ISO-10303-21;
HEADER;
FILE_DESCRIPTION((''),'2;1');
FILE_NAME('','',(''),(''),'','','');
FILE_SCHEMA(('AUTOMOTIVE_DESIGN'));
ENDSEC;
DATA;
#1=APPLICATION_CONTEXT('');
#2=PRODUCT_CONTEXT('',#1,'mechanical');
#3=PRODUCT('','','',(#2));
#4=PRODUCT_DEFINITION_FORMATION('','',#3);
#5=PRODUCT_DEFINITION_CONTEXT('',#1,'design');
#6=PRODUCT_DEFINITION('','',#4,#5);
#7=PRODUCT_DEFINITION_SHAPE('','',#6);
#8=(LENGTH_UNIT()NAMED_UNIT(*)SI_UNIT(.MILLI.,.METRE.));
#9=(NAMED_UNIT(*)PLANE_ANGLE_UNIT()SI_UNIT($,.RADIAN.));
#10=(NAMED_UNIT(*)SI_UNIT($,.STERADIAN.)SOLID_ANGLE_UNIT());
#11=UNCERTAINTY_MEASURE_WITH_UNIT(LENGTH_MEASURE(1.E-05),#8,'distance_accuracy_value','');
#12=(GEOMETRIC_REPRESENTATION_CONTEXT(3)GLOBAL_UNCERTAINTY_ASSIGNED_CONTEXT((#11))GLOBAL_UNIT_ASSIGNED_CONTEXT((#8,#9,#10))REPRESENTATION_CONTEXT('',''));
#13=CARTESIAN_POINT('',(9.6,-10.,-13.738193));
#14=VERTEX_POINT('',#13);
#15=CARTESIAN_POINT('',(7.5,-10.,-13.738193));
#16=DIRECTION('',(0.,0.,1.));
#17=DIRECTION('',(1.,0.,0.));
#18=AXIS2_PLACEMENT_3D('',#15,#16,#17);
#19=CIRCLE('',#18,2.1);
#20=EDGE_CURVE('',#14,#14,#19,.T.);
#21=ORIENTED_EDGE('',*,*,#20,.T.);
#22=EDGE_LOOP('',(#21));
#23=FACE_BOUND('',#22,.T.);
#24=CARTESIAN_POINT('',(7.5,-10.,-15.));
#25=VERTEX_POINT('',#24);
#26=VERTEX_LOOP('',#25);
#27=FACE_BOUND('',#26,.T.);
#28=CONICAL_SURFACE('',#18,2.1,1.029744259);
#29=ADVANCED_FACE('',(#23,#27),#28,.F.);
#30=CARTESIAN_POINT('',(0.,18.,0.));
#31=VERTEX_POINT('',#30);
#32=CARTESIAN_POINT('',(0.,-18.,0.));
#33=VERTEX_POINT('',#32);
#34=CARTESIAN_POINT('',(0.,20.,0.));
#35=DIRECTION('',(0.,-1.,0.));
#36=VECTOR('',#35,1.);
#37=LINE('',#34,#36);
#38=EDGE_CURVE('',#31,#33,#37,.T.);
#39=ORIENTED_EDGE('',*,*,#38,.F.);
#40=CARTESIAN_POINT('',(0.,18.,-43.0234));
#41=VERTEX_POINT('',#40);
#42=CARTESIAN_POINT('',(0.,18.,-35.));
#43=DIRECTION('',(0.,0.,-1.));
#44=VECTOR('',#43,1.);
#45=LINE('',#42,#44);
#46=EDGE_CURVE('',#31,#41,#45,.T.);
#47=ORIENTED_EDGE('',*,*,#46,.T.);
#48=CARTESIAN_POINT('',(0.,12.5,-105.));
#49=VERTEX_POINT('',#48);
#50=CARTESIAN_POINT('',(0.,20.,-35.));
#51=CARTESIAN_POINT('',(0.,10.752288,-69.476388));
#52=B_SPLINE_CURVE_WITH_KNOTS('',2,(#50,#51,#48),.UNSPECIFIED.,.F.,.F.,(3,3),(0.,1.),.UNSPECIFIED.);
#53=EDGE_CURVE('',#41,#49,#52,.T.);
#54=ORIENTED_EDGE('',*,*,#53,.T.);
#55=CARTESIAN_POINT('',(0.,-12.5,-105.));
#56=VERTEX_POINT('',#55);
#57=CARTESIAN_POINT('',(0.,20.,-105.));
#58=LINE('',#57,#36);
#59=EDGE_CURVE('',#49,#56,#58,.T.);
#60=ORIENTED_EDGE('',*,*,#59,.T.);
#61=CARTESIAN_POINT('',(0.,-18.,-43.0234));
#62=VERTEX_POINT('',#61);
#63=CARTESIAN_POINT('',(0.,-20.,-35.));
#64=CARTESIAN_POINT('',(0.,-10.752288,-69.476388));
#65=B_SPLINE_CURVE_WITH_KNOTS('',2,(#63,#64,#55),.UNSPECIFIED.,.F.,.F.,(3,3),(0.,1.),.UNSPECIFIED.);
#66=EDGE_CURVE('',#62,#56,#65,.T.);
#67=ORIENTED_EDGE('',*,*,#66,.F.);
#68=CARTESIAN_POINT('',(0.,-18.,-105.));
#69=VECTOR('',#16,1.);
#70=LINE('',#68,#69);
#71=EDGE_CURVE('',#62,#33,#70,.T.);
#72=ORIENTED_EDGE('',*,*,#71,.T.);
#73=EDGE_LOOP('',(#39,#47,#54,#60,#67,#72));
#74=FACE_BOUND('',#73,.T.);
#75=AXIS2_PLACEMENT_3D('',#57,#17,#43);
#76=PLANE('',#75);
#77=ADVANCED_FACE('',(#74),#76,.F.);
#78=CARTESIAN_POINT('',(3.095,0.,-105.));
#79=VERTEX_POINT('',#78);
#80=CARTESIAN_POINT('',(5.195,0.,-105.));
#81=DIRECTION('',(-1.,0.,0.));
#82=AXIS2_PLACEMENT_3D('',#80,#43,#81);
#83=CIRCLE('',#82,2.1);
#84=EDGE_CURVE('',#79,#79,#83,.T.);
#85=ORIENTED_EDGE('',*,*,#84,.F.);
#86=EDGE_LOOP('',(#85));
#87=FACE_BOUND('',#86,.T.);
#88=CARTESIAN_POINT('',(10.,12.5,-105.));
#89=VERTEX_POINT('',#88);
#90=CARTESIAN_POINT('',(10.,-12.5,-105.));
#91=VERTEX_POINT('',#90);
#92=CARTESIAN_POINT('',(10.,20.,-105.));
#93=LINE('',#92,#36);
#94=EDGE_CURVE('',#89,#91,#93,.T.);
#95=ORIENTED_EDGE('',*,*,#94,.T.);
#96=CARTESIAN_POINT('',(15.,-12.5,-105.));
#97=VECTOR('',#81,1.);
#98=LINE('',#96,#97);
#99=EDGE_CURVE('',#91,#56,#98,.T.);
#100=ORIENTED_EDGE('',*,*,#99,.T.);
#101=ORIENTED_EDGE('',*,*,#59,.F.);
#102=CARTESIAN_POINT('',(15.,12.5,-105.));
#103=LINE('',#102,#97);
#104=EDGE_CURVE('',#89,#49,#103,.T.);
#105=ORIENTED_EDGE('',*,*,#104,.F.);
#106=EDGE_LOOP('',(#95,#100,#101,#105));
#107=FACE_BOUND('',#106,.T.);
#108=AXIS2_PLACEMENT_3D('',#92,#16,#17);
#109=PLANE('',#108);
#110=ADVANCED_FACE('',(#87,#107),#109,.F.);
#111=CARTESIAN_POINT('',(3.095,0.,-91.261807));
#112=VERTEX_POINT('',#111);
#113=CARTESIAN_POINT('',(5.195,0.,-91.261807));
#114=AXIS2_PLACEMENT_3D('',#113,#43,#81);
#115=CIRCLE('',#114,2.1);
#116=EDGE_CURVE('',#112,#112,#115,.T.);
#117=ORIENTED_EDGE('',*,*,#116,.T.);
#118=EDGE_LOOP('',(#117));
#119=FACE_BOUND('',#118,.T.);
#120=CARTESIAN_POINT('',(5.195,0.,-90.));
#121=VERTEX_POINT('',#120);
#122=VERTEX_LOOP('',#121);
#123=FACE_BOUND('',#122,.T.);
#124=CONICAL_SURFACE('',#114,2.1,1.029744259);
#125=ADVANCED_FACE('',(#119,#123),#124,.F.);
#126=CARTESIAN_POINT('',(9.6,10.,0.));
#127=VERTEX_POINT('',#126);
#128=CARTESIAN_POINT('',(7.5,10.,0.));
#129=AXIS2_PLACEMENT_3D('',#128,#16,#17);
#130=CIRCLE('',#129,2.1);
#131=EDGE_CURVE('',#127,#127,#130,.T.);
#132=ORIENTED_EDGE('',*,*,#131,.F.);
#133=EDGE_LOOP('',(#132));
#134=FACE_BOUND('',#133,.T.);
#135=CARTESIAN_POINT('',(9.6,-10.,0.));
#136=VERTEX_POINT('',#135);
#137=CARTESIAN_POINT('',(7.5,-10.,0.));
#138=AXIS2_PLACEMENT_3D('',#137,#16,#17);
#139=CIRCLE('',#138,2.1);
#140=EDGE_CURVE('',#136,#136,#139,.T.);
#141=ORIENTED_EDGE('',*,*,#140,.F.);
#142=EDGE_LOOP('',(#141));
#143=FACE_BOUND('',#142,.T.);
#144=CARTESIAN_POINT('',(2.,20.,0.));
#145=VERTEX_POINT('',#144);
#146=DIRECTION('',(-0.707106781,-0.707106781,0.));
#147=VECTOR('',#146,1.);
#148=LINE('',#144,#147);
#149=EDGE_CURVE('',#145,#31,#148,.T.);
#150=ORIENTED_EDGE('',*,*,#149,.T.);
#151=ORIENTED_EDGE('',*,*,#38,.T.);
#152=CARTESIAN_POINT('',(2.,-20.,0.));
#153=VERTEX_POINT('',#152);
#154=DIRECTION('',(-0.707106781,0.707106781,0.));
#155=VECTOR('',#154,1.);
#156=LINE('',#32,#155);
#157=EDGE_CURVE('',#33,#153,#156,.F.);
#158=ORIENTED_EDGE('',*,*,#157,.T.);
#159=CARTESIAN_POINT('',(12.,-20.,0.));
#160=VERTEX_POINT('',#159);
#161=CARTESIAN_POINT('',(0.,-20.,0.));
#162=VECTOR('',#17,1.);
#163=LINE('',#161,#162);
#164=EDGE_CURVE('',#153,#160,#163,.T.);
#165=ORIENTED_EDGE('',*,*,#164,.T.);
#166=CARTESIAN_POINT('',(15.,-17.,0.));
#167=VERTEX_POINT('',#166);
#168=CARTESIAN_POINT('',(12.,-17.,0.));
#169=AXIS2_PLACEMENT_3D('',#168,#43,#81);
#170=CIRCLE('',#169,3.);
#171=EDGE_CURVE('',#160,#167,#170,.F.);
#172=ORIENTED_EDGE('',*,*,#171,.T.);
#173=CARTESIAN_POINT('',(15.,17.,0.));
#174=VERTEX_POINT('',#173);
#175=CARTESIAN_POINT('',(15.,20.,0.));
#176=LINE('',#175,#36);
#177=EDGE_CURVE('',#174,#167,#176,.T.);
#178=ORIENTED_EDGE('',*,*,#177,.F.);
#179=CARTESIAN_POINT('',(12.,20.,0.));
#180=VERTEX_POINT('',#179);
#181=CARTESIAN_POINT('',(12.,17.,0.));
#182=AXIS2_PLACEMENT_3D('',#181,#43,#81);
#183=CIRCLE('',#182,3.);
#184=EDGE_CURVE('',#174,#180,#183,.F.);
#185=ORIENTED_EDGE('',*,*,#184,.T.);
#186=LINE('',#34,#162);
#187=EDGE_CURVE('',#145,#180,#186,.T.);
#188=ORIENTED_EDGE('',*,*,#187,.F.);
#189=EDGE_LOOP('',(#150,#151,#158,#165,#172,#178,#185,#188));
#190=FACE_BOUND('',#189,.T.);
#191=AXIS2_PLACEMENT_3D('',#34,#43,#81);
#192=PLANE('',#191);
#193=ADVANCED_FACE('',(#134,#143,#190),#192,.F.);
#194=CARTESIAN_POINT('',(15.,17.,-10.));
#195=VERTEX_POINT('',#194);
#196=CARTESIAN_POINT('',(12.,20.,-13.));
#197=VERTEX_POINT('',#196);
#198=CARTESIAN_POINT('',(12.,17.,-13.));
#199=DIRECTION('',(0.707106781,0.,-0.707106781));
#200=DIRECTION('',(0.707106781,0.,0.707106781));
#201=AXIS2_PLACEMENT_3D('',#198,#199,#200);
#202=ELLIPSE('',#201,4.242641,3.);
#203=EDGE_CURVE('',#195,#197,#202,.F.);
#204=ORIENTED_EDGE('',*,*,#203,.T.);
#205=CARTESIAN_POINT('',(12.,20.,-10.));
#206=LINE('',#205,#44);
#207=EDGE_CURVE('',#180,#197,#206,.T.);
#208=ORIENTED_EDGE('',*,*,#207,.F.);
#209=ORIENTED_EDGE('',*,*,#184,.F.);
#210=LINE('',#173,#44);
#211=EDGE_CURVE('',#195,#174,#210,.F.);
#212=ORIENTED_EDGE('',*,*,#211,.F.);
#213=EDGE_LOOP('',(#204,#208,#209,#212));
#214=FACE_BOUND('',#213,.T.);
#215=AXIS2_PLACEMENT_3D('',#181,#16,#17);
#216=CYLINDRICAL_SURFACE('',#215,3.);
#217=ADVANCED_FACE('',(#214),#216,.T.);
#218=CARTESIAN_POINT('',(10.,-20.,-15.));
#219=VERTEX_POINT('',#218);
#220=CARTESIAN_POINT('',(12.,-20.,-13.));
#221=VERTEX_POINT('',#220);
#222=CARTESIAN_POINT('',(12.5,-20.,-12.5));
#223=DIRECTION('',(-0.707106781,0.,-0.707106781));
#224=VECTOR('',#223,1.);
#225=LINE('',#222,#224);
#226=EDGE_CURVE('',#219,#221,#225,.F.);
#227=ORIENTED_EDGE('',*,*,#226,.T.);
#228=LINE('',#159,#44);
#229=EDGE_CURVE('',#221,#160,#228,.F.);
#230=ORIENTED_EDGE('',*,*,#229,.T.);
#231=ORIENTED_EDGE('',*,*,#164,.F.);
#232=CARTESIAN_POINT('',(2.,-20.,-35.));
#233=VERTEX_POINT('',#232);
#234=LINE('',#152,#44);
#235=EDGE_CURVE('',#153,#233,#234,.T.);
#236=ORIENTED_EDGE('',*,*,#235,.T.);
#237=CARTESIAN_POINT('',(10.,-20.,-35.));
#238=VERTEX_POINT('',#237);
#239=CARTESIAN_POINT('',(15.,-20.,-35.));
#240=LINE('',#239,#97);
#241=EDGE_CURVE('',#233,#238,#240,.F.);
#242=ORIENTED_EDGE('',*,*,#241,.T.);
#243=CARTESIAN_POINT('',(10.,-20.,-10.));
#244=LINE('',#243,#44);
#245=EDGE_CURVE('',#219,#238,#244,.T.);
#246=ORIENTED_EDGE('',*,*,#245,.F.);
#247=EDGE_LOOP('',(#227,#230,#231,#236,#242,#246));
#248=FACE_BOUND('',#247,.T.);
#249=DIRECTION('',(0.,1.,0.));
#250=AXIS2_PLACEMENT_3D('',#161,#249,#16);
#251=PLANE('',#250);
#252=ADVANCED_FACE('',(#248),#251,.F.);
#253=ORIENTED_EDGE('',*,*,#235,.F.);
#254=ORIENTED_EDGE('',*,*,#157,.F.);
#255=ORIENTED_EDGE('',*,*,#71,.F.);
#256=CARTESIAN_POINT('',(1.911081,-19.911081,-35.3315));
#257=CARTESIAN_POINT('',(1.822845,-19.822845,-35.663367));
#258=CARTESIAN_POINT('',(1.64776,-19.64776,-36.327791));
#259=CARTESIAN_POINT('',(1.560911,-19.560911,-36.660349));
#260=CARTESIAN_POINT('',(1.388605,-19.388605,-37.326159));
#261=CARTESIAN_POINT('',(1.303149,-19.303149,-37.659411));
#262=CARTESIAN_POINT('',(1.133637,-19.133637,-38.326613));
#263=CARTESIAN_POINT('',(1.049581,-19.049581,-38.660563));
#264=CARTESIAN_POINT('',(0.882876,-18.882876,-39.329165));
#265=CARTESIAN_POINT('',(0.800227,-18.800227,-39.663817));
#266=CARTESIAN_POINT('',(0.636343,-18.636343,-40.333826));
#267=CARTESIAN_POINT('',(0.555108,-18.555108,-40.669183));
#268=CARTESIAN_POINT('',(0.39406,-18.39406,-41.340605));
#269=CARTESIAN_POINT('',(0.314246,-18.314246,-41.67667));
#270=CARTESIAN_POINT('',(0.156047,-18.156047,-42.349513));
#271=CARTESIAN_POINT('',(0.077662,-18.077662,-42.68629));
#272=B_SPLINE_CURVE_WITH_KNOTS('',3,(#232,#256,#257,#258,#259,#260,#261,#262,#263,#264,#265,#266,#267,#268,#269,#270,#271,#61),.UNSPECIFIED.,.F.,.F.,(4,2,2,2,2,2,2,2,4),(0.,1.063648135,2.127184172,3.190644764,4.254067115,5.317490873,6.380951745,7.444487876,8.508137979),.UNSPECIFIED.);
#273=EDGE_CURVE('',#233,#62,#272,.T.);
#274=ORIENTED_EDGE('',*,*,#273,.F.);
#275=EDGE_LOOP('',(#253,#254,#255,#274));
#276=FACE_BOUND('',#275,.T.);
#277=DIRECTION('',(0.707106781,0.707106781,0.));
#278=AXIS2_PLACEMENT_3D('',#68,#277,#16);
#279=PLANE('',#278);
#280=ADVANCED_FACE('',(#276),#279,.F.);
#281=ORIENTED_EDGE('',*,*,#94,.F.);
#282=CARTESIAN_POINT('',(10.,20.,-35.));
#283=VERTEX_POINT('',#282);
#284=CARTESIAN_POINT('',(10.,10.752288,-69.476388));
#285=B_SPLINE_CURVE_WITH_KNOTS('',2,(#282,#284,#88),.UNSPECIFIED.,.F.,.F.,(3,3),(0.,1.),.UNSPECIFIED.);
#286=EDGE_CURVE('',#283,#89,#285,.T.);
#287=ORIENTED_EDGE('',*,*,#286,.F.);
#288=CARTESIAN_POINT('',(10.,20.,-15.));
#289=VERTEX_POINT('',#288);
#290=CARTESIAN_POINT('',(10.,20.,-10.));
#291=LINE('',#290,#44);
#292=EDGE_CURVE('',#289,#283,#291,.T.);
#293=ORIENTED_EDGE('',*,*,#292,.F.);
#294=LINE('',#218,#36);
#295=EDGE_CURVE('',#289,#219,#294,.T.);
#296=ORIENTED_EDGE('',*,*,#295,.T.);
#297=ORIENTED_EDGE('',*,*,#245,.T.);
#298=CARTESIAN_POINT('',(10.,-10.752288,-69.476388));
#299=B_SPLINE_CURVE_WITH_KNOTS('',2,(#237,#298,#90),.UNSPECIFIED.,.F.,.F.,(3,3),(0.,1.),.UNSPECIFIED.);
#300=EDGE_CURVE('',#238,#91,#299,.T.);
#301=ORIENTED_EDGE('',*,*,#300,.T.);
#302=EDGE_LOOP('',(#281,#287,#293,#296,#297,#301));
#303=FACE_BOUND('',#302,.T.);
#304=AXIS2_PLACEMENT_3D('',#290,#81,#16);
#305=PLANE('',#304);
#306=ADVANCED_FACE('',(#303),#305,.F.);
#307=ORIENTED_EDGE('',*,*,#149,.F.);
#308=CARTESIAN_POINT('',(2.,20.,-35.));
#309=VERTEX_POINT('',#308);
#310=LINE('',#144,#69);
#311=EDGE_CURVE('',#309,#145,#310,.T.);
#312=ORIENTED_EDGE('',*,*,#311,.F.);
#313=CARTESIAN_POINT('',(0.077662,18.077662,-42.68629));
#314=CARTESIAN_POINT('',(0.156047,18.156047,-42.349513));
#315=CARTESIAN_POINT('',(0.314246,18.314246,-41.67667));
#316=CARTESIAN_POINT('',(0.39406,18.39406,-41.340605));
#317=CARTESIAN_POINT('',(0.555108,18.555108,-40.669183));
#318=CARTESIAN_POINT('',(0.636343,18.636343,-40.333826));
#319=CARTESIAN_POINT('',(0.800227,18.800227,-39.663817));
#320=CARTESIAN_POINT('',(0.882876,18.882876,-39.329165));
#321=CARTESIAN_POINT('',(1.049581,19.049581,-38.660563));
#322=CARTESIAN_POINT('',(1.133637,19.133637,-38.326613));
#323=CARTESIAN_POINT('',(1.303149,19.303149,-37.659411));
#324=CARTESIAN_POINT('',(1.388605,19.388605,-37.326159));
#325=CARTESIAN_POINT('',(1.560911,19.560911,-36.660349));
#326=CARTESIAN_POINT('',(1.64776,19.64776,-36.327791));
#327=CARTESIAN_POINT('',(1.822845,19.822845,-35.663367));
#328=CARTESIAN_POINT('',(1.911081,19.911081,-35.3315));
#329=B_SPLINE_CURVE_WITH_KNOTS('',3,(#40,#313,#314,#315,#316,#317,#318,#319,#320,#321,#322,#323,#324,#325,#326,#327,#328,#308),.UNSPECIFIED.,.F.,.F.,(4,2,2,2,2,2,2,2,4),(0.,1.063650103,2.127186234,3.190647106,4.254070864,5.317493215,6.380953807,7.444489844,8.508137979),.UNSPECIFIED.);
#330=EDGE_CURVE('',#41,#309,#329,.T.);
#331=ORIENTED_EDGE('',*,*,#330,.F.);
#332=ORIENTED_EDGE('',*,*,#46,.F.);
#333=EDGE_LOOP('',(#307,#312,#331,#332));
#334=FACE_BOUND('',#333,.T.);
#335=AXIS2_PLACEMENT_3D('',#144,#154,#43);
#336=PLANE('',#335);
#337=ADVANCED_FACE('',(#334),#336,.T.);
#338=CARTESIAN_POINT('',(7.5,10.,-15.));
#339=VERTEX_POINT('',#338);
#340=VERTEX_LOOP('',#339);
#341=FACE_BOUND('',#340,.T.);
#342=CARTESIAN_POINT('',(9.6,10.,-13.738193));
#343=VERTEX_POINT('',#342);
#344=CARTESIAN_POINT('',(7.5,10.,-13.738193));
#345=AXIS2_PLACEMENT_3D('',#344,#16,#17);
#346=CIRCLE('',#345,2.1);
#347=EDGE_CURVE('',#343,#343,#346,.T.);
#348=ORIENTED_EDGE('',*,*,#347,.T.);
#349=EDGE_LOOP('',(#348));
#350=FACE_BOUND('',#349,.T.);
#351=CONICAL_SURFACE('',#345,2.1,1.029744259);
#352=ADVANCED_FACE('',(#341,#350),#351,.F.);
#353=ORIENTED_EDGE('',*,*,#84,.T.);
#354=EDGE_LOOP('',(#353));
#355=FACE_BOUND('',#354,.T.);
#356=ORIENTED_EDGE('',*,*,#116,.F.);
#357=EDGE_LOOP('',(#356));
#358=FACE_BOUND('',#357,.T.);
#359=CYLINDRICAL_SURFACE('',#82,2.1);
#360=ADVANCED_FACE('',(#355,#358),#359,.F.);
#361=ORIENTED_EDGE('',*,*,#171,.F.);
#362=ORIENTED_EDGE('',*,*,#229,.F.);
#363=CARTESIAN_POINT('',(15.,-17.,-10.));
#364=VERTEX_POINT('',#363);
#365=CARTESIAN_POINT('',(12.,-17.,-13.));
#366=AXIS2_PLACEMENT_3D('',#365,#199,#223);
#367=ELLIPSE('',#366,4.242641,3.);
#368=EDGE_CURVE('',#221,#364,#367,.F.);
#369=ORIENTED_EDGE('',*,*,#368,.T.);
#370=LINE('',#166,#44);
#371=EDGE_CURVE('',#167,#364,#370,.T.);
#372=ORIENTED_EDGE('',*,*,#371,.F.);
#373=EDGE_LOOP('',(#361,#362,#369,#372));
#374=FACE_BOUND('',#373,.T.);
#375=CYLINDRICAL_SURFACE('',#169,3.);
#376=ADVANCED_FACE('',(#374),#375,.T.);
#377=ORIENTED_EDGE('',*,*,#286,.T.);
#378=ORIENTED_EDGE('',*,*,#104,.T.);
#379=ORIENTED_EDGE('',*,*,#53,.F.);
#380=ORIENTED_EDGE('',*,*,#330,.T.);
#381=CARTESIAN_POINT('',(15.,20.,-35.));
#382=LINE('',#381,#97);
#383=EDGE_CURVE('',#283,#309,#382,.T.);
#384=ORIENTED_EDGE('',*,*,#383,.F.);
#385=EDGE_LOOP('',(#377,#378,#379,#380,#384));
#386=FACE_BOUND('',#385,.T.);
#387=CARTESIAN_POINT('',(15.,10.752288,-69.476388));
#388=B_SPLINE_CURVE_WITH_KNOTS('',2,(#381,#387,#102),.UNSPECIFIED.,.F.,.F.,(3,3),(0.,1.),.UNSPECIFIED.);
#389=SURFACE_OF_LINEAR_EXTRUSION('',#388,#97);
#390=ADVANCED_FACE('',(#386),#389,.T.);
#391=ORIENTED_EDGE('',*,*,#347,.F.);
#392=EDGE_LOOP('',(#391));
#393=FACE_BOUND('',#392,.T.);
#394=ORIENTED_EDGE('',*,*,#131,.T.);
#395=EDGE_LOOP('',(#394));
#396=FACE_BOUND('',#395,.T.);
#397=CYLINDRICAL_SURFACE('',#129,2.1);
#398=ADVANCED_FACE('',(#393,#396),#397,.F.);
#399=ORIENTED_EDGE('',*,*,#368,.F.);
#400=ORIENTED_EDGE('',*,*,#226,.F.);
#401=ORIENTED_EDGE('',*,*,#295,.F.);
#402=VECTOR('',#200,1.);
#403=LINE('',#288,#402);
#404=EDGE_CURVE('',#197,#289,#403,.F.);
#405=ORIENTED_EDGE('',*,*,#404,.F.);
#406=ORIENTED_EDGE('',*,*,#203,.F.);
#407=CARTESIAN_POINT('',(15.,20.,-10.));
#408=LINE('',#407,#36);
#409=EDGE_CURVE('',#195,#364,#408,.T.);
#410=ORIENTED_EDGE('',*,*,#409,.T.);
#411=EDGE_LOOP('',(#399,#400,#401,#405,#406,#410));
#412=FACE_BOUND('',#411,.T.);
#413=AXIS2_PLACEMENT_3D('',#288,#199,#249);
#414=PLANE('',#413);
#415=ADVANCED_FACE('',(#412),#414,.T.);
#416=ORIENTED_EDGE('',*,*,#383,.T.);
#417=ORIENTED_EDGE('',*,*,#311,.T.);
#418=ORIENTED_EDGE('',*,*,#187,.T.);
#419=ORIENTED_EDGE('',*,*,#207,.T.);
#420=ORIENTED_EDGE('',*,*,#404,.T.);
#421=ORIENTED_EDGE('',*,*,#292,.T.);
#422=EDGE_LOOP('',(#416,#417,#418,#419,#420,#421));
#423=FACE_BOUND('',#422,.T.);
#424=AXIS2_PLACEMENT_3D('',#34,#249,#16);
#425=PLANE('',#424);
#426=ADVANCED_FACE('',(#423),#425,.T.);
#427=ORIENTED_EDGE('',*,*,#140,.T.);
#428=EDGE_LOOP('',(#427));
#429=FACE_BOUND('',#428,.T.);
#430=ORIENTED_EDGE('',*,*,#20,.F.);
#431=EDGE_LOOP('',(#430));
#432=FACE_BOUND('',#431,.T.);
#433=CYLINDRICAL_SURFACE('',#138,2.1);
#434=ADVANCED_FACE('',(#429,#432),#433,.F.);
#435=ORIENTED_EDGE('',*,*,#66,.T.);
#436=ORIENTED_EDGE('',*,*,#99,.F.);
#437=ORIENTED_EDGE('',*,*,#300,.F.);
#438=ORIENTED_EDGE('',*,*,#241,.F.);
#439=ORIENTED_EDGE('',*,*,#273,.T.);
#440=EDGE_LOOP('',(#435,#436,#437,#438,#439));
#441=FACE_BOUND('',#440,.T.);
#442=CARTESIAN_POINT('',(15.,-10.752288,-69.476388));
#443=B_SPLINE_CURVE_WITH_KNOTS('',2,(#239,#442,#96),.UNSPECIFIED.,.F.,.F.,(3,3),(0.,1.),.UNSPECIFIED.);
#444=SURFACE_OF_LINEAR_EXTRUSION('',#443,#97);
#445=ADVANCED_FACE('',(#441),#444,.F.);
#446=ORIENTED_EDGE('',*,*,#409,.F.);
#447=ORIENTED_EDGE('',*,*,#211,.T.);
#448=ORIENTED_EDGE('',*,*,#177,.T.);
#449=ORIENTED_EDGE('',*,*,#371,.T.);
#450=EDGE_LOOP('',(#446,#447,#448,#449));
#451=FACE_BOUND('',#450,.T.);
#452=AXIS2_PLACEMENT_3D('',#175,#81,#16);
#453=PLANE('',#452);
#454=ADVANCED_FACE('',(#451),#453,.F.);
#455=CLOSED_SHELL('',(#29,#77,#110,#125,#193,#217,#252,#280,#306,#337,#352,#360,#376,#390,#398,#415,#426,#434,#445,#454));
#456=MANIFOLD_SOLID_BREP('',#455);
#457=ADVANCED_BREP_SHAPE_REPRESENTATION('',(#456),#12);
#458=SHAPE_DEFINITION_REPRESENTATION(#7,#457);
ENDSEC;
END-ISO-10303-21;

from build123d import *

# Parameters (mm, degrees)
BOSS_EXTRUDE1_DEPTH   = 20
CUT_EXTRUDE1_DEPTH    = 108.935165725
FILLET2_R             = 3
M5_TAPPED_HOLE1_D     = 4.2
M5_TAPPED_HOLE1_DEPTH = 13.7381927
M5_TAPPED_HOLE1_TIP   = 1.2618073
M5_TAPPED_HOLE2_D     = 4.2
M5_TAPPED_HOLE2_DEPTH = 13.7381927
M5_TAPPED_HOLE2_TIP   = 1.2618073
CHAMFER1_SIZE         = 5
CHAMFER2_SIZE         = 2


with BuildPart() as part:
    # Sketch1 → Boss-Extrude1 (new, symmetric)
    with BuildSketch(Plane(origin=(0, 0, 0), x_dir=(1, 0, 0), z_dir=(0, 1, 0))):
        Polygon((0, 0), (15, 0), (15, 10), (10, 10), (10, 105), (0, 105), align=None)
    extrude(amount=BOSS_EXTRUDE1_DEPTH, both=True)

    # Sketch3 → Cut-Extrude1 (cut, through all)
    with BuildSketch(Plane.ZY):
        with BuildLine():
            Line((-35, -20), (-105, -20))
            Line((-105, -20), (-105, -12.5))
            add(Edge.make_bspline(
                [(-105, -12.5), (-69.476387912, -10.752287941), (-35, -20)],
                knots=[0, 0, 0, 1, 1, 1], degree=2))
        make_face()
    cut_extrude1 = extrude(amount=-CUT_EXTRUDE1_DEPTH, mode=Mode.SUBTRACT)

    # Mirror1: Cut-Extrude1 across plane
    add(cut_extrude1.mirror(Plane.ZX), mode=Mode.SUBTRACT)

    # Fillet2
    fillet2_edges = [part.edges().sort_by_distance(p)[0] for p in [
        (15, 20, -5),
        (15, -20, -5),
    ]]
    fillet(fillet2_edges, radius=FILLET2_R)

    # M5 Tapped Hole1
    with Locations(Plane(origin=(0, 0, -105), x_dir=(-1, 0, 0), z_dir=(0, 0, -1))):
        with Locations((-5.195, 0)):
            Hole(M5_TAPPED_HOLE1_D / 2, depth=M5_TAPPED_HOLE1_DEPTH)
            with Locations((0, 0, -(M5_TAPPED_HOLE1_DEPTH + M5_TAPPED_HOLE1_TIP / 2))):  # 118° drill point
                Cone(0, M5_TAPPED_HOLE1_D / 2, M5_TAPPED_HOLE1_TIP, mode=Mode.SUBTRACT)

    # M5 Tapped Hole2
    with Locations(Plane.XY):
        with Locations((7.5, -10), (7.5, 10)):
            Hole(M5_TAPPED_HOLE2_D / 2, depth=M5_TAPPED_HOLE2_DEPTH)
            with Locations((0, 0, -(M5_TAPPED_HOLE2_DEPTH + M5_TAPPED_HOLE2_TIP / 2))):  # 118° drill point
                Cone(0, M5_TAPPED_HOLE2_D / 2, M5_TAPPED_HOLE2_TIP, mode=Mode.SUBTRACT)

    # Chamfer1
    chamfer1_edges = [part.edges().sort_by_distance(p)[0] for p in [
        (10, 0, -10),
    ]]
    chamfer(chamfer1_edges, length=CHAMFER1_SIZE - 0.0001)  # a hair under: the kernel refuses the full size

    # Chamfer2
    chamfer2_edges = [part.edges().sort_by_distance(p)[0] for p in [
        (0, -20, -17.5),
        (0, 20, -17.5),
    ]]
    chamfer(chamfer2_edges, length=CHAMFER2_SIZE)


solid = part.part
